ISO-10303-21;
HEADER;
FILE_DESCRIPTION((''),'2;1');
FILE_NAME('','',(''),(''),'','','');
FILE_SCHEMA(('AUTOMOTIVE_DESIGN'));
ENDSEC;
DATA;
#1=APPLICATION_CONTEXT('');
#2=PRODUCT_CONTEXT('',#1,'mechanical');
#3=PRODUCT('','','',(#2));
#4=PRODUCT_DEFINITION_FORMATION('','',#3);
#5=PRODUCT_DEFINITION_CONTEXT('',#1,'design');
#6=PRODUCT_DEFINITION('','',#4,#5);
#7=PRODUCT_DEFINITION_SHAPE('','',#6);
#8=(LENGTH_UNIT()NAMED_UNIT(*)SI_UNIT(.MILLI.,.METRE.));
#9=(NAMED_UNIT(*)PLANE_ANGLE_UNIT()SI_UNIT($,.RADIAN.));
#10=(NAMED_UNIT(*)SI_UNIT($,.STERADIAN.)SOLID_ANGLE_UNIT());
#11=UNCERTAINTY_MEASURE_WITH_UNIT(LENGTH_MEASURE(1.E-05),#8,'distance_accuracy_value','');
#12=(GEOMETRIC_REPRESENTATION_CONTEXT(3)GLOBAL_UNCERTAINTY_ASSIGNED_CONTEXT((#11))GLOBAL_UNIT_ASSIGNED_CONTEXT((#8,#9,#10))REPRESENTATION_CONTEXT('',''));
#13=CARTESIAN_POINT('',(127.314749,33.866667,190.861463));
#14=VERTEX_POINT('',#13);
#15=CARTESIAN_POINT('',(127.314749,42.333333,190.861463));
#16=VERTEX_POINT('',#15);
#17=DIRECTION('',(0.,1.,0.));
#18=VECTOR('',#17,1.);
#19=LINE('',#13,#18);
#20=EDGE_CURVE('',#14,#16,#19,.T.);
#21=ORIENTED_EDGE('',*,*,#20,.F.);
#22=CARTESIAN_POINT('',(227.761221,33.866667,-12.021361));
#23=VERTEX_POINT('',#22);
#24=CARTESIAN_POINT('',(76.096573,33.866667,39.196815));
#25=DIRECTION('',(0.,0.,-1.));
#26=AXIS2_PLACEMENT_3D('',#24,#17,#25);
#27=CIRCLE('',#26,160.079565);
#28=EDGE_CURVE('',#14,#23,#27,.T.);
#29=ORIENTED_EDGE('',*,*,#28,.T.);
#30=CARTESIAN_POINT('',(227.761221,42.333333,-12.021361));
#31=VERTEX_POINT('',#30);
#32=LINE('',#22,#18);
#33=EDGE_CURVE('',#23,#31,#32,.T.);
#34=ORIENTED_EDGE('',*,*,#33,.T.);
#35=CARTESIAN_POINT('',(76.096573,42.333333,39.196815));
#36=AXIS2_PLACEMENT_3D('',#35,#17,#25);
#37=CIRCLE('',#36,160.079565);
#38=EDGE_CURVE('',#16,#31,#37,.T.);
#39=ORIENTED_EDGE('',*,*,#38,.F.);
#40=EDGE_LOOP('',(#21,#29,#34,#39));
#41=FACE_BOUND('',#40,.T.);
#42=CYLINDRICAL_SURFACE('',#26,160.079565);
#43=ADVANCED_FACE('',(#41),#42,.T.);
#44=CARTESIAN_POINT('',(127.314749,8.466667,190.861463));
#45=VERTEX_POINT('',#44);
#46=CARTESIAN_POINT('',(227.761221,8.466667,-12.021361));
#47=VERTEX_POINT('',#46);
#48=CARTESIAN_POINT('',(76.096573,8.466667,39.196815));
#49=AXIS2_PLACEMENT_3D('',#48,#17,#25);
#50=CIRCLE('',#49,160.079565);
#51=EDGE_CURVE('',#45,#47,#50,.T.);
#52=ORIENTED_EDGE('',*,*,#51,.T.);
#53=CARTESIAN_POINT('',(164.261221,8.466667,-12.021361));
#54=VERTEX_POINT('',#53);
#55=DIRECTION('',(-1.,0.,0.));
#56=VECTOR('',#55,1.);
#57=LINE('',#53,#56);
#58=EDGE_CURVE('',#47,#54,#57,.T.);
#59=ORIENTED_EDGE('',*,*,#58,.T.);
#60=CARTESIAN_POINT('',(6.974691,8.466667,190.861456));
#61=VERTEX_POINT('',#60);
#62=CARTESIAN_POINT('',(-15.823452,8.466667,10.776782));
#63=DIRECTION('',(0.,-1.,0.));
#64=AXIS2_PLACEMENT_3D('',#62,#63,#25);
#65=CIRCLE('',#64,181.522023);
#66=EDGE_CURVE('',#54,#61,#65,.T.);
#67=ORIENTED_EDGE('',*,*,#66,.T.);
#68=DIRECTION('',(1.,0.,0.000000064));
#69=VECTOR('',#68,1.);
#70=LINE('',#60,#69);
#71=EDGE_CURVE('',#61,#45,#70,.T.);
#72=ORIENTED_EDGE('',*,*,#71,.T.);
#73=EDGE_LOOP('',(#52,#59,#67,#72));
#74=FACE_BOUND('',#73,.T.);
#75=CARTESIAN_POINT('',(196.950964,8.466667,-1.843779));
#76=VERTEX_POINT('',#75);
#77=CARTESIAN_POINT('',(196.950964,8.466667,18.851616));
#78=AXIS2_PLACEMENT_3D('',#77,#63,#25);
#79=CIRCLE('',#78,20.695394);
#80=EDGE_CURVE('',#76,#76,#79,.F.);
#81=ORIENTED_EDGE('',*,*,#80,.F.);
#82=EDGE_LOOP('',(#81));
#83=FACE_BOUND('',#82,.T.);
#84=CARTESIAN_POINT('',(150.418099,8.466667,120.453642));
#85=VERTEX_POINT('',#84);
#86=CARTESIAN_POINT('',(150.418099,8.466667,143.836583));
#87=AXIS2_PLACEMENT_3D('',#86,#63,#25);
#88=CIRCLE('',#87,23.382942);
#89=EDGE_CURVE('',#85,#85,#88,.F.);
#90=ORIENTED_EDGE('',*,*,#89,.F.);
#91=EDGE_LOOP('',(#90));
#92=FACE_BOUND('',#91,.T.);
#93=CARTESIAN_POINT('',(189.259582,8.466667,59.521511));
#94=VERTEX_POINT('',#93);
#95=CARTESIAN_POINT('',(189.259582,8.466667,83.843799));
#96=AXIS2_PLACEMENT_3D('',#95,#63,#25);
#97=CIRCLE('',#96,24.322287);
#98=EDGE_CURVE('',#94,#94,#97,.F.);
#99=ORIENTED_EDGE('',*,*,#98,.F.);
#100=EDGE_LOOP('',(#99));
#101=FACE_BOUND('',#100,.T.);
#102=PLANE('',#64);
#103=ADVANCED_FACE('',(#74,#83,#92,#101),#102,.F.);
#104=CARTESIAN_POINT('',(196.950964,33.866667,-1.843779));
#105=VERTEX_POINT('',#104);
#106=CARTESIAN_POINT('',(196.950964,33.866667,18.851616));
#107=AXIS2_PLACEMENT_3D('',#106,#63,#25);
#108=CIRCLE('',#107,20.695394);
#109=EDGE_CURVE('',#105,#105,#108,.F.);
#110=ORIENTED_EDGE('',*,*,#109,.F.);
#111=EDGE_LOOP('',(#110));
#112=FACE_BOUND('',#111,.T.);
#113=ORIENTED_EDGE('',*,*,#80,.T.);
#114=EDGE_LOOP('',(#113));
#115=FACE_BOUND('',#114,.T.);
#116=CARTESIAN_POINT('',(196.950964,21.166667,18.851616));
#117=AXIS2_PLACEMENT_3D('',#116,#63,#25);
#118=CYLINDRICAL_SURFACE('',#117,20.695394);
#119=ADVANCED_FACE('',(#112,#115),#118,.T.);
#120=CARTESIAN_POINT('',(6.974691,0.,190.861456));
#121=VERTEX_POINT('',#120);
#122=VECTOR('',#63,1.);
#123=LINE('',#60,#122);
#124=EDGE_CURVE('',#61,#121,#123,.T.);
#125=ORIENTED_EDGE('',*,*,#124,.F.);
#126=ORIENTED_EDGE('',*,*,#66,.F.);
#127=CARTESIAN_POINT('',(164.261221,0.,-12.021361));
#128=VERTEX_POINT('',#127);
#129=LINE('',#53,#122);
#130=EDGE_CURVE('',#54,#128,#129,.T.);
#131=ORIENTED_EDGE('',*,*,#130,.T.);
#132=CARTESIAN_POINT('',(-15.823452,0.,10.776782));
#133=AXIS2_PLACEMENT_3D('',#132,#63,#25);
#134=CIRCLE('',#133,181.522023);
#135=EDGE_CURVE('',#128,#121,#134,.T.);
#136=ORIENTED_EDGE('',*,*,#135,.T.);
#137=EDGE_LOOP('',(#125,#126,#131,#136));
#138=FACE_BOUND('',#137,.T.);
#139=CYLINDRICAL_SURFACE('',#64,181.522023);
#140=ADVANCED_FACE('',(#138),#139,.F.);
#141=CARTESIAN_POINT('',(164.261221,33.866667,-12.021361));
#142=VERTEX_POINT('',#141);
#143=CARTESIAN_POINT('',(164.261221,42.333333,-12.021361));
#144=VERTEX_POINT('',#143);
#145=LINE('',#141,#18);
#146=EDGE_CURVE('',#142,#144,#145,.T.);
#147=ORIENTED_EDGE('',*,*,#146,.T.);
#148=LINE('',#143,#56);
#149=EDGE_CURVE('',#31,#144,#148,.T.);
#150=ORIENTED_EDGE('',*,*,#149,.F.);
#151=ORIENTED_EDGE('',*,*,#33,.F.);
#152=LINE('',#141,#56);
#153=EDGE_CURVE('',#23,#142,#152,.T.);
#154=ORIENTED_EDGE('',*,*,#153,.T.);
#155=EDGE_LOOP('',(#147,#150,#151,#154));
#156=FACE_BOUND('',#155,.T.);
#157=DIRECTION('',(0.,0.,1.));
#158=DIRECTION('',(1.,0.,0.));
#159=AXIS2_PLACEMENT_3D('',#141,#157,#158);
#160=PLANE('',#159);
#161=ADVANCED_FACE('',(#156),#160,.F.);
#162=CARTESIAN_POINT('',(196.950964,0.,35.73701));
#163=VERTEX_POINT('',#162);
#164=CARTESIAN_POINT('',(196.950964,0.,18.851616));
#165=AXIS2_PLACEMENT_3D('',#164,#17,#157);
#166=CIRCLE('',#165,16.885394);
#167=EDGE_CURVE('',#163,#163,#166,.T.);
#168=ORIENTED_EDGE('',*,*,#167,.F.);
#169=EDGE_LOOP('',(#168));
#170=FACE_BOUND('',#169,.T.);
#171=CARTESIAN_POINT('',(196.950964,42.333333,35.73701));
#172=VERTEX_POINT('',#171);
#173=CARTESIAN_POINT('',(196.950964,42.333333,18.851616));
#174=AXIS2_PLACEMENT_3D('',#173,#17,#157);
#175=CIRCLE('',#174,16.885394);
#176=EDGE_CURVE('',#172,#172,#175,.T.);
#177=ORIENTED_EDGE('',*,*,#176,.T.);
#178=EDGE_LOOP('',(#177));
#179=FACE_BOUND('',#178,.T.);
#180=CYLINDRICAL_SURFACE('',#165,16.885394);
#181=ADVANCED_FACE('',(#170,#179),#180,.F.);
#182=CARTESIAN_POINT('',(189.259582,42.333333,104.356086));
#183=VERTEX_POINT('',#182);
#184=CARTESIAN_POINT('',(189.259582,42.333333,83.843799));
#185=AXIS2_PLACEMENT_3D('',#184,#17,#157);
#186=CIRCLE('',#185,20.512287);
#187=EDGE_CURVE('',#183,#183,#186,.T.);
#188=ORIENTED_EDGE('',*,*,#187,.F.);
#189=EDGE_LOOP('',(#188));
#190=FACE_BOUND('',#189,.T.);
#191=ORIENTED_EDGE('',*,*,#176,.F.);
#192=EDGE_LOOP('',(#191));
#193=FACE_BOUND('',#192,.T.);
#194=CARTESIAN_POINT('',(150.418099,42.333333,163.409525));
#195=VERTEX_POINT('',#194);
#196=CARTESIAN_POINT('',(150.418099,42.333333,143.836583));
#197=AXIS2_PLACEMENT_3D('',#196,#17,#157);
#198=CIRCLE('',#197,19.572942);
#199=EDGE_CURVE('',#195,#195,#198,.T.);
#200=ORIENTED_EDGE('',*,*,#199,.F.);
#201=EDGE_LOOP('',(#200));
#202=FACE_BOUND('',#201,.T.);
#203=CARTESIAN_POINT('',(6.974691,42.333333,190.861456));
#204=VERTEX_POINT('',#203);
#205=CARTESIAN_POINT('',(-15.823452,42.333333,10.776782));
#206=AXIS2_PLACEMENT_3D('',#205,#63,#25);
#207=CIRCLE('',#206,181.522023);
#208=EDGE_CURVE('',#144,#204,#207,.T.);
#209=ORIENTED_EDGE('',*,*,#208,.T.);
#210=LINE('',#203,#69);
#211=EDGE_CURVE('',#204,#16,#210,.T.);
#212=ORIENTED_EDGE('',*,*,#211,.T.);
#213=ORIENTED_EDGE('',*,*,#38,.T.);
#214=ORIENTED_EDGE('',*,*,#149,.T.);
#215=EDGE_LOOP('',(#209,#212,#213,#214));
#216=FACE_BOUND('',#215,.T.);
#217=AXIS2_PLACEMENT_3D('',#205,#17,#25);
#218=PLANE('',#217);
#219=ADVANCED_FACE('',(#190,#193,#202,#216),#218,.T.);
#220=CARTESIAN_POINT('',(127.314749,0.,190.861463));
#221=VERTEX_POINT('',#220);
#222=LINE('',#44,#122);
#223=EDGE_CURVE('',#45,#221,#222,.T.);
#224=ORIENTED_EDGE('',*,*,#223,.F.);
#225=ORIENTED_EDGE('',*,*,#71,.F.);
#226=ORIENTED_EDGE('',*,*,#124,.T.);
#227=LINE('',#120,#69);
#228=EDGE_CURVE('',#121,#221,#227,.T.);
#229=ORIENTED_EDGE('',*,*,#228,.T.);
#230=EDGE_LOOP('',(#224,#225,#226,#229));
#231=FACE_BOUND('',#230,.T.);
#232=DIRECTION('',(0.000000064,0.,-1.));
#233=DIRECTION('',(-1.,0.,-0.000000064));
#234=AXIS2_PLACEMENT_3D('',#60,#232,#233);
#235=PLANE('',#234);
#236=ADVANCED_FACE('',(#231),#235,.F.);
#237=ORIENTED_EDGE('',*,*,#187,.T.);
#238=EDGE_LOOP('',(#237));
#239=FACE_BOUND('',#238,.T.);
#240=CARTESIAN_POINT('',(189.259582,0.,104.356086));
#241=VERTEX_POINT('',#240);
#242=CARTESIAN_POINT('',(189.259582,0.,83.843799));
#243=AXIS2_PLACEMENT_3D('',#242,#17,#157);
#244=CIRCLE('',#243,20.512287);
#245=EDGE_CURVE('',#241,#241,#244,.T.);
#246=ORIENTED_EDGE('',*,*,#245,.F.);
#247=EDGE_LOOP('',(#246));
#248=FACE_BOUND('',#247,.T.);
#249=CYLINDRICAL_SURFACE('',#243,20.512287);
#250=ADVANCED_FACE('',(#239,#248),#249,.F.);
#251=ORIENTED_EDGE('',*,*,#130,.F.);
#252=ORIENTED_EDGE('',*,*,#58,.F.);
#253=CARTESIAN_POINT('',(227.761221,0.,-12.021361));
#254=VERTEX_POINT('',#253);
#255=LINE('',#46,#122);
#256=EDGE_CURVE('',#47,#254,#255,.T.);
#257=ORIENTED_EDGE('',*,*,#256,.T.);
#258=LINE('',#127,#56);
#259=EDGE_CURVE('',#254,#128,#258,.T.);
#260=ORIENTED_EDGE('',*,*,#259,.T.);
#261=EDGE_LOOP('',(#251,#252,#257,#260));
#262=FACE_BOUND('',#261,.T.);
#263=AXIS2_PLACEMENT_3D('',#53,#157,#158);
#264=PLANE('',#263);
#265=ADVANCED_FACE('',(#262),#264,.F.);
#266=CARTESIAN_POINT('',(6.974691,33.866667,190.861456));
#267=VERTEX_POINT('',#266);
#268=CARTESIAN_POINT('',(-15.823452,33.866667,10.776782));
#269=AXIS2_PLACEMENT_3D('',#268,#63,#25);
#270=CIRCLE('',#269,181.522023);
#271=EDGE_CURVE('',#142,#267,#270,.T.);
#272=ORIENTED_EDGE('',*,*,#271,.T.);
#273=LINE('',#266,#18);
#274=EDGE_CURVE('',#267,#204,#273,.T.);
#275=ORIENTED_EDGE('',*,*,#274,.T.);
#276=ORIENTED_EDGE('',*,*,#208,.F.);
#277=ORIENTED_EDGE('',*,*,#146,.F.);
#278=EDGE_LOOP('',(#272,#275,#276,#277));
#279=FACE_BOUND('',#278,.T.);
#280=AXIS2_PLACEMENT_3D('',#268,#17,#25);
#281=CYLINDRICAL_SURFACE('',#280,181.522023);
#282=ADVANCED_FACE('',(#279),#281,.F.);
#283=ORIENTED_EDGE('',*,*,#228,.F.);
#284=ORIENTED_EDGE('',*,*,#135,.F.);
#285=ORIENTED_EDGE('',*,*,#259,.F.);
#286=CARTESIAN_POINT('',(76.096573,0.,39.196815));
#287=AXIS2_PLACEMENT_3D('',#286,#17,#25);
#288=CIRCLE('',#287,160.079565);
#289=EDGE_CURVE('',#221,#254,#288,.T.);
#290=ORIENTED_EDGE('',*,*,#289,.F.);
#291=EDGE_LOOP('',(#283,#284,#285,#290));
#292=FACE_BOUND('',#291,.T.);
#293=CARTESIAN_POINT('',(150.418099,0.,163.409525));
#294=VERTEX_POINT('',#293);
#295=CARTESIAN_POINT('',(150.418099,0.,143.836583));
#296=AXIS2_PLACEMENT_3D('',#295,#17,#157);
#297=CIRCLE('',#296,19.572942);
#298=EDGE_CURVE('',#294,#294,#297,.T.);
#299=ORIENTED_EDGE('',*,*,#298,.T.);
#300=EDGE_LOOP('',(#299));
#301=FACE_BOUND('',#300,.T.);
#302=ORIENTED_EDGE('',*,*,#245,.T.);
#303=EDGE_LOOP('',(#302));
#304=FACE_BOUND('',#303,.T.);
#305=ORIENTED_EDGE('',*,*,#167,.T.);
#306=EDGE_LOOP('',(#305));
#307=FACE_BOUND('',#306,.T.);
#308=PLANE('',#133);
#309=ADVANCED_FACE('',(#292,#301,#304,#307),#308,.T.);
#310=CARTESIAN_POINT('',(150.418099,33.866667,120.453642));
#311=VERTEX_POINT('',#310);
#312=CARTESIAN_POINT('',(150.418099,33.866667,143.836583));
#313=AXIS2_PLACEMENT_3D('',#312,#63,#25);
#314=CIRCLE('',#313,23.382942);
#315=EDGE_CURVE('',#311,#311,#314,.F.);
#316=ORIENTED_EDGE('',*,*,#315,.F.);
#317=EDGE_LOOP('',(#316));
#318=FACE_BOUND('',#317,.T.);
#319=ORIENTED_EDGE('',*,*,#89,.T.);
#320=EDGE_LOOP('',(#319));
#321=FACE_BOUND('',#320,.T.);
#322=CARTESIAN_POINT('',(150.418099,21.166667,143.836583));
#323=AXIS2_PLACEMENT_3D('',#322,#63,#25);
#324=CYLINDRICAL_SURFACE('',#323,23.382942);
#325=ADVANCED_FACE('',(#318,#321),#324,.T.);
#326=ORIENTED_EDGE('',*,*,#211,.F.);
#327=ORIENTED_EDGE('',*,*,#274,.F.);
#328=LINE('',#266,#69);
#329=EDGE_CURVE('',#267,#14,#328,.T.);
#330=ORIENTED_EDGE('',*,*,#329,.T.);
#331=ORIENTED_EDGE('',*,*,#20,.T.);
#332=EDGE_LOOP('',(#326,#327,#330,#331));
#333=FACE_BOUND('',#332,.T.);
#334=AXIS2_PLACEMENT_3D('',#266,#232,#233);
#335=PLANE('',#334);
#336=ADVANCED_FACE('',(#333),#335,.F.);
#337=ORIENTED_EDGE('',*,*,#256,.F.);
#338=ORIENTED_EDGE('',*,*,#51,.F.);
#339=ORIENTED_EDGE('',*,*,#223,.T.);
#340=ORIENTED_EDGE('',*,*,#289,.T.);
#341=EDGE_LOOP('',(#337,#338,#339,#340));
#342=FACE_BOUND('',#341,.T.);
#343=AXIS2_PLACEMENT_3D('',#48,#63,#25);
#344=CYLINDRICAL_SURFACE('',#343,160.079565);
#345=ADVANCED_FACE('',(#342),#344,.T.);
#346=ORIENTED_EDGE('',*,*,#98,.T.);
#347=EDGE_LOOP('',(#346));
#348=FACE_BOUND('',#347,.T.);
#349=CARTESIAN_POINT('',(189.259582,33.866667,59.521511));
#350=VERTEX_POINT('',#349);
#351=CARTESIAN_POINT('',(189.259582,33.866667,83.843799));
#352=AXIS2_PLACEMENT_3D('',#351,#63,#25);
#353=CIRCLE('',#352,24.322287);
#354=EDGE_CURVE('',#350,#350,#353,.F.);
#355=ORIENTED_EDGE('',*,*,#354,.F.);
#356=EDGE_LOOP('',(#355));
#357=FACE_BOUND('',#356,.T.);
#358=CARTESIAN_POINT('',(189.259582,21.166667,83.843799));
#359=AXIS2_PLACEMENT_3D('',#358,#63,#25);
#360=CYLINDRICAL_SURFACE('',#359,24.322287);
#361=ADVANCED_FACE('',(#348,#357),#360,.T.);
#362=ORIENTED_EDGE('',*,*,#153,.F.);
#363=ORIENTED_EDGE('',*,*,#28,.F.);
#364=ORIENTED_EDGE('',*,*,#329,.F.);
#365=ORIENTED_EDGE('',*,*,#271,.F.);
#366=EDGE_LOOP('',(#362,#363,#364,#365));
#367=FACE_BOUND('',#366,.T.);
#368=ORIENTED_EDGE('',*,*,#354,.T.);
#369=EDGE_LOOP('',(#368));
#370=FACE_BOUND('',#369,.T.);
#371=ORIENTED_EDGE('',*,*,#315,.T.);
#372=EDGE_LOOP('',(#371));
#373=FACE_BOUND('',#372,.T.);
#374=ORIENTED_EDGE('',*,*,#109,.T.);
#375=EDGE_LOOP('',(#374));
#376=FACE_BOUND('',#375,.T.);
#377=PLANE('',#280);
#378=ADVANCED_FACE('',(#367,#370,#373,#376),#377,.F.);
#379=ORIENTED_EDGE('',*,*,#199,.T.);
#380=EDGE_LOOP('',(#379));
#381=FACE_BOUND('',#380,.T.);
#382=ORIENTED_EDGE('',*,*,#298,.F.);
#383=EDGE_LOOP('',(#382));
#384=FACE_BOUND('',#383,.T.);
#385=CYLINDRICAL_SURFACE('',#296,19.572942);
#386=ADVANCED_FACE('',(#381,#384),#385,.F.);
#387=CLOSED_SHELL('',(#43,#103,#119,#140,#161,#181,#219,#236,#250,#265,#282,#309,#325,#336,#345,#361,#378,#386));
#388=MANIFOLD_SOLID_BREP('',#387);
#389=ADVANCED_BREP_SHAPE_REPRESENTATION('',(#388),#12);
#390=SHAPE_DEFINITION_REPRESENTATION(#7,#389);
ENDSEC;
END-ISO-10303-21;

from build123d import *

# Parameters (mm, degrees)
BOSS_EXTRUDE1_DEPTH = 8.466666667
SKETCH2_R           = 16.885394085
SKETCH2_R_2         = 20.512287495
SKETCH2_R_3         = 19.572941721
CUT_EXTRUDE3_DEPTH  = 304.774506345
BOSS_EXTRUDE2_START = 12.7
SKETCH2_4_R         = 20.695394085
SKETCH2_4_R_2       = 16.885394085
SKETCH2_4_R_3       = 24.322287495
SKETCH2_4_R_4       = 20.512287495
SKETCH2_4_R_5       = 23.382941721
SKETCH2_4_R_6       = 19.572941721
BOSS_EXTRUDE2_DEPTH = 12.7


with BuildPart() as part:
    # Sketch1 → Boss-Extrude1 (new body)
    with BuildSketch(Plane(origin=(0, 0, 0), x_dir=(1, 0, 0), z_dir=(0, 1, 0))):
        with BuildLine():
            Line((164.261221292, 12.021360676), (227.761221292, 12.021360676))
            ThreePointArc((227.761221292, 12.021360676), (219.55639394, -110.223196762), (127.314749355, -190.861463232))
            Line((127.314749355, -190.861463232), (6.974690834, -190.861455535))
            ThreePointArc((6.974690834, -190.861455535), (127.636363086, -121.995154476), (164.261221292, 12.021360676))
        make_face()
    boss_extrude1 = extrude(amount=BOSS_EXTRUDE1_DEPTH)

    # Sketch2 → Cut-Extrude3 (cut, through all)
    with BuildSketch(Plane(origin=(0, 8.466666667, 0), x_dir=(1, 0, 0), z_dir=(0, 1, 0))):
        with Locations((196.950964228, -18.851615567)):
            Circle(SKETCH2_R)
        with Locations((189.259581589, -83.843798865)):
            Circle(SKETCH2_R_2)
        with Locations((150.418099263, -143.836583448)):
            Circle(SKETCH2_R_3)
    cut_extrude3 = extrude(amount=-CUT_EXTRUDE3_DEPTH, mode=Mode.SUBTRACT)

    # Sketch2<4> → Boss-Extrude2 (add)
    # profile 1 of 3: a face of its own
    with BuildSketch(Plane(origin=(0, 8.466666667, 0), x_dir=(1, 0, 0), z_dir=(0, 1, 0)).offset(BOSS_EXTRUDE2_START)):
        with Locations((196.950964228, -18.851615567)):
            Circle(SKETCH2_4_R)
        with Locations((196.950964228, -18.851615567)):
            Circle(SKETCH2_4_R_2, mode=Mode.SUBTRACT)
    # profile 2 of 3: a face of its own
    with BuildSketch(Plane(origin=(0, 8.466666667, 0), x_dir=(1, 0, 0), z_dir=(0, 1, 0)).offset(BOSS_EXTRUDE2_START)):
        with Locations((189.259581589, -83.843798865)):
            Circle(SKETCH2_4_R_3)
        with Locations((189.259581589, -83.843798865)):
            Circle(SKETCH2_4_R_4, mode=Mode.SUBTRACT)
    # profile 3 of 3: a face of its own
    with BuildSketch(Plane(origin=(0, 8.466666667, 0), x_dir=(1, 0, 0), z_dir=(0, 1, 0)).offset(BOSS_EXTRUDE2_START)):
        with Locations((150.418099263, -143.836583448)):
            Circle(SKETCH2_4_R_5)
        with Locations((150.418099263, -143.836583448)):
            Circle(SKETCH2_4_R_6, mode=Mode.SUBTRACT)
    boss_extrude2 = extrude(amount=-BOSS_EXTRUDE2_DEPTH)

    # Mirror3: Boss-Extrude1, Cut-Extrude3, Boss-Extrude2 across plane
    add(boss_extrude1.mirror(Plane.ZX.offset(21.166666667)))
    add(cut_extrude3.mirror(Plane.ZX.offset(21.166666667)), mode=Mode.SUBTRACT)
    add(boss_extrude2.mirror(Plane.ZX.offset(21.166666667)))


solid = part.part
